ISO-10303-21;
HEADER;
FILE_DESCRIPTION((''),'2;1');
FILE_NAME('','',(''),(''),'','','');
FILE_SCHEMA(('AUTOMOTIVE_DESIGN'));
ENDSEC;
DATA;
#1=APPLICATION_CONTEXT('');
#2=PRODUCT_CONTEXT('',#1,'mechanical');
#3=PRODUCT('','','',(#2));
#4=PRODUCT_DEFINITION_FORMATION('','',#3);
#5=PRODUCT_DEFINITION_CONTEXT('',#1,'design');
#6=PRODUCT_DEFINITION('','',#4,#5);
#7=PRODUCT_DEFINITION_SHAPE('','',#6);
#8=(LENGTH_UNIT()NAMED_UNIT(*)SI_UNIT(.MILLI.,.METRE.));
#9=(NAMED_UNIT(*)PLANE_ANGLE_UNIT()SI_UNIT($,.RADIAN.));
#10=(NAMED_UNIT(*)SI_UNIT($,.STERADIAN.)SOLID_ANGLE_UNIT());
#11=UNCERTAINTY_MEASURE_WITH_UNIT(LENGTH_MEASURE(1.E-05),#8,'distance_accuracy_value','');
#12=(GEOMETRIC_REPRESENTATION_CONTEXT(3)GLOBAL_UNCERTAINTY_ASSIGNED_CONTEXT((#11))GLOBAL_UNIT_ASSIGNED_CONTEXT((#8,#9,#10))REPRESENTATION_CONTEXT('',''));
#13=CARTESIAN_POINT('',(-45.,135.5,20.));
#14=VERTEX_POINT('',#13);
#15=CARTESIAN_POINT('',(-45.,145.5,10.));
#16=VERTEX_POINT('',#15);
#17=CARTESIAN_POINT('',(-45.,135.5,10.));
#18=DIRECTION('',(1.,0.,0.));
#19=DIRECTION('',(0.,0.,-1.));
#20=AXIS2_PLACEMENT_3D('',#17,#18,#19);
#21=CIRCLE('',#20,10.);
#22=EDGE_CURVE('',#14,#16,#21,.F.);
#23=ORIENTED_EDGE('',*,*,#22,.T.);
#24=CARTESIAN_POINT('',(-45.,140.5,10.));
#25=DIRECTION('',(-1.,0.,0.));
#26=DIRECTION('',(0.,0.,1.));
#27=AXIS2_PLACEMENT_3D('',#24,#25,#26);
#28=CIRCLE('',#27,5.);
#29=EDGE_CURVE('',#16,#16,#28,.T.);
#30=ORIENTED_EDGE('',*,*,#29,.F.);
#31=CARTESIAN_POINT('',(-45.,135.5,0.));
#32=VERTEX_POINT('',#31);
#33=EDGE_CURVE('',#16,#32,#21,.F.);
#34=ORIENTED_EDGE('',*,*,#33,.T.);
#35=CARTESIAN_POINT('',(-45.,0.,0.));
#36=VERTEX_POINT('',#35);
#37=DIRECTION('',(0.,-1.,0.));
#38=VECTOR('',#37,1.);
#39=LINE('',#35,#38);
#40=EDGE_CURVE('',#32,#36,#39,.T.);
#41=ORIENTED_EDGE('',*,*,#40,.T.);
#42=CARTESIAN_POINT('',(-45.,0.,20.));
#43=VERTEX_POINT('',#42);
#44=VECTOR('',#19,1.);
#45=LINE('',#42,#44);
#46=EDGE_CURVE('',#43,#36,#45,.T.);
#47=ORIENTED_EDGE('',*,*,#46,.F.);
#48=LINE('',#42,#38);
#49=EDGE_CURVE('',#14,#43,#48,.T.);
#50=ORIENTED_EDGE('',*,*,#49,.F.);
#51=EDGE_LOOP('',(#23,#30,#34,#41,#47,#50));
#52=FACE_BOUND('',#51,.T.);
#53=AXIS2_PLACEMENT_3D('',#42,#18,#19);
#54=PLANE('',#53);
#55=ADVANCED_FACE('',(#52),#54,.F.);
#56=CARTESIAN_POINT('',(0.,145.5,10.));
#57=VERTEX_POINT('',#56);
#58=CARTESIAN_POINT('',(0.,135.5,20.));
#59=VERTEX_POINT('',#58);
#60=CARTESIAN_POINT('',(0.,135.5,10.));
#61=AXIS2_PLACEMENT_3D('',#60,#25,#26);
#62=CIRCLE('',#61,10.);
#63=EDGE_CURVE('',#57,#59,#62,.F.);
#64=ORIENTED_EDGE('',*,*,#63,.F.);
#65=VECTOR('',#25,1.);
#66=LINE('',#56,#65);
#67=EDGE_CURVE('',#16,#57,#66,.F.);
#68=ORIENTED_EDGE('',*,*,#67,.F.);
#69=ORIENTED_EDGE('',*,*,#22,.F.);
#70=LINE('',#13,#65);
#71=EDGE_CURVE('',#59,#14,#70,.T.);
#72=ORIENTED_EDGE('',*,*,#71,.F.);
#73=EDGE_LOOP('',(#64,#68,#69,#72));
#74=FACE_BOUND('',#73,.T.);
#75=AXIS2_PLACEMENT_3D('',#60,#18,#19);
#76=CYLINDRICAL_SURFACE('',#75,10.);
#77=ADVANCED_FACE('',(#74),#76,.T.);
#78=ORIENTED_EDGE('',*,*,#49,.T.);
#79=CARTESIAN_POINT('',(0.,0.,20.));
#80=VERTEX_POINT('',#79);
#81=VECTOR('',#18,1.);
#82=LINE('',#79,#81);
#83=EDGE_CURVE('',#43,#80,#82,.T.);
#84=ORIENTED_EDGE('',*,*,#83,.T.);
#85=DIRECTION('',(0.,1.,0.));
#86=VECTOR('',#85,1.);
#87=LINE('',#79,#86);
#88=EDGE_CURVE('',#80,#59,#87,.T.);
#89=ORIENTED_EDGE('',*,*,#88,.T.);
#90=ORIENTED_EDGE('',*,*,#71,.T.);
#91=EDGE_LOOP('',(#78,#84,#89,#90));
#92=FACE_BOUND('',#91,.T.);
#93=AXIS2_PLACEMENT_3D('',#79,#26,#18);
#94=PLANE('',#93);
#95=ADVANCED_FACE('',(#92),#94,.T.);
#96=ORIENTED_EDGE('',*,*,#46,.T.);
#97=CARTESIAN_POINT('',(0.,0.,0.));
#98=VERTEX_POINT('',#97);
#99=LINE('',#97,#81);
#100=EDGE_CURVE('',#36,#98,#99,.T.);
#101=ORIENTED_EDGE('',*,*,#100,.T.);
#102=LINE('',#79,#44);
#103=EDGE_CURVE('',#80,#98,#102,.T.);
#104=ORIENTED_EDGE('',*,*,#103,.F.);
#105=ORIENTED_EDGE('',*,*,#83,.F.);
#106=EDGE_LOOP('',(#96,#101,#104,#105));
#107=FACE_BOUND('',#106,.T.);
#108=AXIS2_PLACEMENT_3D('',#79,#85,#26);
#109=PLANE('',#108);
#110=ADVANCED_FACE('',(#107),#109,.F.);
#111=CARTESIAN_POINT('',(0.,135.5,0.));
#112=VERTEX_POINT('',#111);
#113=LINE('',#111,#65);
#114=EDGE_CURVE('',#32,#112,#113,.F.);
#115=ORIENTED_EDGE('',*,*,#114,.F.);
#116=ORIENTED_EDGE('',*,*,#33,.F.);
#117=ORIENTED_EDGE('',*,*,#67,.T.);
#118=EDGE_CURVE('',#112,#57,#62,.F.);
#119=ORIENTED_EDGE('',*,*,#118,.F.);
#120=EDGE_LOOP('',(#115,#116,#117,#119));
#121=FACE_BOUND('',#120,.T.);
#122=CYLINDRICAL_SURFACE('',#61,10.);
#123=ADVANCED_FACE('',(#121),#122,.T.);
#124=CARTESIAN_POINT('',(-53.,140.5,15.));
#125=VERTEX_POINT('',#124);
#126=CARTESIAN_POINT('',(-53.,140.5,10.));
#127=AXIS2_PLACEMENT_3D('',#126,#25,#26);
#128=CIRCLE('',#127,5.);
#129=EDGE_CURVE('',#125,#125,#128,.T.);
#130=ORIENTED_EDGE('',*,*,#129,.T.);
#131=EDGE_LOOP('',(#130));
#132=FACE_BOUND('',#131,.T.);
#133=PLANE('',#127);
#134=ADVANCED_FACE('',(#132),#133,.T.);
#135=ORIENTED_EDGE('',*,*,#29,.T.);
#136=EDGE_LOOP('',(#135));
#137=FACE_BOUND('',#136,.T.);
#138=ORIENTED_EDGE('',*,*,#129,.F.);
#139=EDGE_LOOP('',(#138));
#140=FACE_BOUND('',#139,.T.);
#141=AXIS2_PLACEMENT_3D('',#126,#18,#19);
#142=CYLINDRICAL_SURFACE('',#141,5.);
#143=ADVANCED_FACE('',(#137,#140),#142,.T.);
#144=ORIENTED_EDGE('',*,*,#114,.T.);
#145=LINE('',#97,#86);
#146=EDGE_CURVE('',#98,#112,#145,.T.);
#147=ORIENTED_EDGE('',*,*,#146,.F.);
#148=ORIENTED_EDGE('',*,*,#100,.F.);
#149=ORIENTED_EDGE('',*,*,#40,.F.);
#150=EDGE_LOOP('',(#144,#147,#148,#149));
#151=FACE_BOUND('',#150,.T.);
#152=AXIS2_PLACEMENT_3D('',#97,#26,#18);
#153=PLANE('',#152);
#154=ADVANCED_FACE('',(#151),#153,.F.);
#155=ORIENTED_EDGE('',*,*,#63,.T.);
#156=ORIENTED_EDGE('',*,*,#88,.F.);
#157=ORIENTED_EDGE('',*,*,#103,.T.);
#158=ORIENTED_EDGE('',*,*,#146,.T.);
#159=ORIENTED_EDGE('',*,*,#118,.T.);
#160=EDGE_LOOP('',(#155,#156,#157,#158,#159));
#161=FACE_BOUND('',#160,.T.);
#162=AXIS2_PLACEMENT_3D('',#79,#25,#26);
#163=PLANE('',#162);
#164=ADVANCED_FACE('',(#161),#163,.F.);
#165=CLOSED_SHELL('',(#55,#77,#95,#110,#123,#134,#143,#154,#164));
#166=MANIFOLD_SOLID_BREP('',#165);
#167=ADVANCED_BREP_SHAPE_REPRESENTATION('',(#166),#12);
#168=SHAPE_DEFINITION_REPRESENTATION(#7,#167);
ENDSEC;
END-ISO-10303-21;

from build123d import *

# Parameters (mm, degrees)
CROQUIS1_W              = 45
CROQUIS1_H              = 145.5
SALIENTE_EXTRUIR1_DEPTH = 20
REDONDEO1_R             = 10
CROQUIS2_R              = 5
SALIENTE_EXTRUIR2_DEPTH = 8


with BuildPart() as part:
    # Croquis1 → Saliente-Extruir1 (new body)
    with BuildSketch(Plane.XY):
        with Locations((-22.5, 72.75)):
            Rectangle(CROQUIS1_W, CROQUIS1_H)
    extrude(amount=SALIENTE_EXTRUIR1_DEPTH)

    # Redondeo1
    redondeo1_edges = [part.edges().sort_by_distance(p)[0] for p in [
        (-22.5, 145.5, 0),
        (-22.5, 145.5, 20),
    ]]
    fillet(redondeo1_edges, radius=REDONDEO1_R - 0.0001)  # a hair under: the kernel refuses the full size

    # Croquis2 → Saliente-Extruir2 (add)
    with BuildSketch(Plane.ZY.offset(45)):
        with Locations(Location((10, 140.5, 0), (0, 0, 89.99948753))):
            Circle(CROQUIS2_R)
    extrude(amount=SALIENTE_EXTRUIR2_DEPTH)


solid = part.part
